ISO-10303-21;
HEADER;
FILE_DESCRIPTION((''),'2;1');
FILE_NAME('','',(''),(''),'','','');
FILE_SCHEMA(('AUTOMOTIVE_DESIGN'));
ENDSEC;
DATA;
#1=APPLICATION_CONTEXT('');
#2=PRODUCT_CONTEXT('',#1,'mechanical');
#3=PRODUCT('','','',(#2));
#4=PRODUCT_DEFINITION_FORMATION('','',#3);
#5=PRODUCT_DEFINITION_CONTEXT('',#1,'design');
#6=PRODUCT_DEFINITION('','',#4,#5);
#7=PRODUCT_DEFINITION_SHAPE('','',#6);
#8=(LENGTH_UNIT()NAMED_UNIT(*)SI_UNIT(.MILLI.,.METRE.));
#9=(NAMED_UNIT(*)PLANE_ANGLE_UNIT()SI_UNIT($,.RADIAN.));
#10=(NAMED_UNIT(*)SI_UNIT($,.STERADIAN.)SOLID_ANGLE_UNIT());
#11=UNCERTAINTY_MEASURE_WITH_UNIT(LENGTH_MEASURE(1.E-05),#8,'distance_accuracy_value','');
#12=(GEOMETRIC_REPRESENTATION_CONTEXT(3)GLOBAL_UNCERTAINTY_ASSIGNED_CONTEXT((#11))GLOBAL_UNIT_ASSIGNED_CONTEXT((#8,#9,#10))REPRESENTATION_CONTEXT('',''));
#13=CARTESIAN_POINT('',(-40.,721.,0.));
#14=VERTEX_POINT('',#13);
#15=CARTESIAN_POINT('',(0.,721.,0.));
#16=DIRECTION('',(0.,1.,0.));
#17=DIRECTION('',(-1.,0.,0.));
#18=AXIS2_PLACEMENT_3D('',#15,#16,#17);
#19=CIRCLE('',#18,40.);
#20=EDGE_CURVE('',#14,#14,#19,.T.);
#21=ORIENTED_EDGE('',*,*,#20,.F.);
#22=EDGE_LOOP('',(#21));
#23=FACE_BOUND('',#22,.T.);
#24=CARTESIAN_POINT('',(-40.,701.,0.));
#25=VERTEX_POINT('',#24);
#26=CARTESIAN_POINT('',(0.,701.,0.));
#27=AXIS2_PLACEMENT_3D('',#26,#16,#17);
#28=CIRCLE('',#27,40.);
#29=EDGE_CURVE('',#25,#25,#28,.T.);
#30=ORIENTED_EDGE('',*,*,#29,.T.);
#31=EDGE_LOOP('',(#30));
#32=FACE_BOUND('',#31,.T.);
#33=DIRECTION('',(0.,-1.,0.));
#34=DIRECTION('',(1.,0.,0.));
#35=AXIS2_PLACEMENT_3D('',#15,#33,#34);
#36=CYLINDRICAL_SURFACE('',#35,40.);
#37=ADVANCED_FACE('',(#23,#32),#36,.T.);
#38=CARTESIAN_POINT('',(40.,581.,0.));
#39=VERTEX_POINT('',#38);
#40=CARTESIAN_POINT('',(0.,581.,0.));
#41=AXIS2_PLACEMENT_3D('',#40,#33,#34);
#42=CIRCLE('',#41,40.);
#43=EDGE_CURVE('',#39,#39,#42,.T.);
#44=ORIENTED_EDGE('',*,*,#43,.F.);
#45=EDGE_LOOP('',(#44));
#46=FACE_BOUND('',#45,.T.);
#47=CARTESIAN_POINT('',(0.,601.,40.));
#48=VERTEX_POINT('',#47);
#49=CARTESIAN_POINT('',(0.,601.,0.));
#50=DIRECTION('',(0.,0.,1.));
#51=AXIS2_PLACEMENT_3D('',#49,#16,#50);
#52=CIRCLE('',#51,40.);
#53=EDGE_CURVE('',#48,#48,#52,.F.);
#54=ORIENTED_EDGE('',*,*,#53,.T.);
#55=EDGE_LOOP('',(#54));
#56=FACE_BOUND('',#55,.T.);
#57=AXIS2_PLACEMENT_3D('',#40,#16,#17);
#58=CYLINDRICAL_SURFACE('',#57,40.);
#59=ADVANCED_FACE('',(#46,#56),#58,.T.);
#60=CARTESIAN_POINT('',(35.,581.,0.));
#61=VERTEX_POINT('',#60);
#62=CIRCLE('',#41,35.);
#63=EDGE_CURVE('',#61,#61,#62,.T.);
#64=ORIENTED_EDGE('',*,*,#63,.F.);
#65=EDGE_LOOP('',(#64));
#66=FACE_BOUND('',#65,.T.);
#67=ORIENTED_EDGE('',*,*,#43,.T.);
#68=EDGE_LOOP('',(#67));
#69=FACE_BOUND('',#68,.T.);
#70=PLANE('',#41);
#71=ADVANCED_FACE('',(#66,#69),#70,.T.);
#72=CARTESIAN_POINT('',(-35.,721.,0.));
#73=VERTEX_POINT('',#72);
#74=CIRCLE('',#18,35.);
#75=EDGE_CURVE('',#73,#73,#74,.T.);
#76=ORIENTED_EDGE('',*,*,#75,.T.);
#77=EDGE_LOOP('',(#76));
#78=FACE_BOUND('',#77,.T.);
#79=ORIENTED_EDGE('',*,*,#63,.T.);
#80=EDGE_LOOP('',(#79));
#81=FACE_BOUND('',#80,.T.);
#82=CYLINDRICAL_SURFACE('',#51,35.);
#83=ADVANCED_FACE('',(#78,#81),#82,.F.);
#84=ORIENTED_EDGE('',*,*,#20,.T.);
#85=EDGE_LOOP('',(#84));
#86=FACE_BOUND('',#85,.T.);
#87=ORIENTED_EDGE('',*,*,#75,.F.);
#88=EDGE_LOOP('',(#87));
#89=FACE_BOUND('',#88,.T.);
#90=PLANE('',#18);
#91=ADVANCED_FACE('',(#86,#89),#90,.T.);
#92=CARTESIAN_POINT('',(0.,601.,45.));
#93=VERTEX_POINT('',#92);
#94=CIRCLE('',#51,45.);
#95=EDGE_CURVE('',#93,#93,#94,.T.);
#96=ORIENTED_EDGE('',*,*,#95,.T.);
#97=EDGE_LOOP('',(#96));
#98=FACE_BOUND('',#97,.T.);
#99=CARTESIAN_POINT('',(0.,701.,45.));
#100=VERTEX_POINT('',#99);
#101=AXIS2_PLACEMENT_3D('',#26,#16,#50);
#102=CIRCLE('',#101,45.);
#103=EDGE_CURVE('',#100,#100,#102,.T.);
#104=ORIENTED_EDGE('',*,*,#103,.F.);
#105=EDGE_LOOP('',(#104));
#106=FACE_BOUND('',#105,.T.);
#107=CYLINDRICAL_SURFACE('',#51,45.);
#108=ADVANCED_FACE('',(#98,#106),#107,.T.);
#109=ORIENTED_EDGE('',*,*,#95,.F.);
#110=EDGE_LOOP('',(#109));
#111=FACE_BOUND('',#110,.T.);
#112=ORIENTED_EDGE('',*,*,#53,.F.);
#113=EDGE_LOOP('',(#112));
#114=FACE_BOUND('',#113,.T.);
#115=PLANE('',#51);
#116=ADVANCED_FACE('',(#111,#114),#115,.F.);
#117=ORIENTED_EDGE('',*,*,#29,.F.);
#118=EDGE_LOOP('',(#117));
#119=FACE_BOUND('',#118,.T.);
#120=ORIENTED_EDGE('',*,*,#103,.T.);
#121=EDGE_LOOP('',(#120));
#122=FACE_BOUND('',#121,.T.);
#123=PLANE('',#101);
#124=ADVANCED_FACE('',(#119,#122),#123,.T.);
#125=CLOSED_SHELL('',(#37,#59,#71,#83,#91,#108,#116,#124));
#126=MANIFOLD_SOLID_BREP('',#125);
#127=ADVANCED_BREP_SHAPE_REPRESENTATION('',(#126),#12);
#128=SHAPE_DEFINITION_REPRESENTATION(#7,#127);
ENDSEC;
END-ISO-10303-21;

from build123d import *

# Parameters (mm, degrees)
F_3DSKETCH4_R       = 45
F_3DSKETCH4_R_2     = 35
BOSS_EXTRUDE3_DEPTH = 100
SKETCH3_R           = 40
SKETCH3_R_2         = 35
BOSS_EXTRUDE4_DEPTH = 20
BOSS_EXTRUDE5_START = 20
SKETCH4_R           = 40
SKETCH4_R_2         = 35
BOSS_EXTRUDE5_DEPTH = 20


with BuildPart() as part:
    # 3DSketch4 → Boss-Extrude3 (new body)
    with BuildSketch(Plane.ZX.offset(601)):
        Circle(F_3DSKETCH4_R)
        Circle(F_3DSKETCH4_R_2, mode=Mode.SUBTRACT)
    extrude(amount=BOSS_EXTRUDE3_DEPTH)

    # Sketch3 → Boss-Extrude4 (add)
    with BuildSketch(Plane(origin=(0, 701, 0), x_dir=(1, 0, 0), z_dir=(0, 1, 0))):
        Circle(SKETCH3_R)
        Circle(SKETCH3_R_2, mode=Mode.SUBTRACT)
    extrude(amount=BOSS_EXTRUDE4_DEPTH)

    # Sketch4 → Boss-Extrude5 (add)
    with BuildSketch(Plane.XZ.offset(-601).offset(BOSS_EXTRUDE5_START)):
        Circle(SKETCH4_R)
        Circle(SKETCH4_R_2, mode=Mode.SUBTRACT)
    extrude(amount=-BOSS_EXTRUDE5_DEPTH)


solid = part.part
